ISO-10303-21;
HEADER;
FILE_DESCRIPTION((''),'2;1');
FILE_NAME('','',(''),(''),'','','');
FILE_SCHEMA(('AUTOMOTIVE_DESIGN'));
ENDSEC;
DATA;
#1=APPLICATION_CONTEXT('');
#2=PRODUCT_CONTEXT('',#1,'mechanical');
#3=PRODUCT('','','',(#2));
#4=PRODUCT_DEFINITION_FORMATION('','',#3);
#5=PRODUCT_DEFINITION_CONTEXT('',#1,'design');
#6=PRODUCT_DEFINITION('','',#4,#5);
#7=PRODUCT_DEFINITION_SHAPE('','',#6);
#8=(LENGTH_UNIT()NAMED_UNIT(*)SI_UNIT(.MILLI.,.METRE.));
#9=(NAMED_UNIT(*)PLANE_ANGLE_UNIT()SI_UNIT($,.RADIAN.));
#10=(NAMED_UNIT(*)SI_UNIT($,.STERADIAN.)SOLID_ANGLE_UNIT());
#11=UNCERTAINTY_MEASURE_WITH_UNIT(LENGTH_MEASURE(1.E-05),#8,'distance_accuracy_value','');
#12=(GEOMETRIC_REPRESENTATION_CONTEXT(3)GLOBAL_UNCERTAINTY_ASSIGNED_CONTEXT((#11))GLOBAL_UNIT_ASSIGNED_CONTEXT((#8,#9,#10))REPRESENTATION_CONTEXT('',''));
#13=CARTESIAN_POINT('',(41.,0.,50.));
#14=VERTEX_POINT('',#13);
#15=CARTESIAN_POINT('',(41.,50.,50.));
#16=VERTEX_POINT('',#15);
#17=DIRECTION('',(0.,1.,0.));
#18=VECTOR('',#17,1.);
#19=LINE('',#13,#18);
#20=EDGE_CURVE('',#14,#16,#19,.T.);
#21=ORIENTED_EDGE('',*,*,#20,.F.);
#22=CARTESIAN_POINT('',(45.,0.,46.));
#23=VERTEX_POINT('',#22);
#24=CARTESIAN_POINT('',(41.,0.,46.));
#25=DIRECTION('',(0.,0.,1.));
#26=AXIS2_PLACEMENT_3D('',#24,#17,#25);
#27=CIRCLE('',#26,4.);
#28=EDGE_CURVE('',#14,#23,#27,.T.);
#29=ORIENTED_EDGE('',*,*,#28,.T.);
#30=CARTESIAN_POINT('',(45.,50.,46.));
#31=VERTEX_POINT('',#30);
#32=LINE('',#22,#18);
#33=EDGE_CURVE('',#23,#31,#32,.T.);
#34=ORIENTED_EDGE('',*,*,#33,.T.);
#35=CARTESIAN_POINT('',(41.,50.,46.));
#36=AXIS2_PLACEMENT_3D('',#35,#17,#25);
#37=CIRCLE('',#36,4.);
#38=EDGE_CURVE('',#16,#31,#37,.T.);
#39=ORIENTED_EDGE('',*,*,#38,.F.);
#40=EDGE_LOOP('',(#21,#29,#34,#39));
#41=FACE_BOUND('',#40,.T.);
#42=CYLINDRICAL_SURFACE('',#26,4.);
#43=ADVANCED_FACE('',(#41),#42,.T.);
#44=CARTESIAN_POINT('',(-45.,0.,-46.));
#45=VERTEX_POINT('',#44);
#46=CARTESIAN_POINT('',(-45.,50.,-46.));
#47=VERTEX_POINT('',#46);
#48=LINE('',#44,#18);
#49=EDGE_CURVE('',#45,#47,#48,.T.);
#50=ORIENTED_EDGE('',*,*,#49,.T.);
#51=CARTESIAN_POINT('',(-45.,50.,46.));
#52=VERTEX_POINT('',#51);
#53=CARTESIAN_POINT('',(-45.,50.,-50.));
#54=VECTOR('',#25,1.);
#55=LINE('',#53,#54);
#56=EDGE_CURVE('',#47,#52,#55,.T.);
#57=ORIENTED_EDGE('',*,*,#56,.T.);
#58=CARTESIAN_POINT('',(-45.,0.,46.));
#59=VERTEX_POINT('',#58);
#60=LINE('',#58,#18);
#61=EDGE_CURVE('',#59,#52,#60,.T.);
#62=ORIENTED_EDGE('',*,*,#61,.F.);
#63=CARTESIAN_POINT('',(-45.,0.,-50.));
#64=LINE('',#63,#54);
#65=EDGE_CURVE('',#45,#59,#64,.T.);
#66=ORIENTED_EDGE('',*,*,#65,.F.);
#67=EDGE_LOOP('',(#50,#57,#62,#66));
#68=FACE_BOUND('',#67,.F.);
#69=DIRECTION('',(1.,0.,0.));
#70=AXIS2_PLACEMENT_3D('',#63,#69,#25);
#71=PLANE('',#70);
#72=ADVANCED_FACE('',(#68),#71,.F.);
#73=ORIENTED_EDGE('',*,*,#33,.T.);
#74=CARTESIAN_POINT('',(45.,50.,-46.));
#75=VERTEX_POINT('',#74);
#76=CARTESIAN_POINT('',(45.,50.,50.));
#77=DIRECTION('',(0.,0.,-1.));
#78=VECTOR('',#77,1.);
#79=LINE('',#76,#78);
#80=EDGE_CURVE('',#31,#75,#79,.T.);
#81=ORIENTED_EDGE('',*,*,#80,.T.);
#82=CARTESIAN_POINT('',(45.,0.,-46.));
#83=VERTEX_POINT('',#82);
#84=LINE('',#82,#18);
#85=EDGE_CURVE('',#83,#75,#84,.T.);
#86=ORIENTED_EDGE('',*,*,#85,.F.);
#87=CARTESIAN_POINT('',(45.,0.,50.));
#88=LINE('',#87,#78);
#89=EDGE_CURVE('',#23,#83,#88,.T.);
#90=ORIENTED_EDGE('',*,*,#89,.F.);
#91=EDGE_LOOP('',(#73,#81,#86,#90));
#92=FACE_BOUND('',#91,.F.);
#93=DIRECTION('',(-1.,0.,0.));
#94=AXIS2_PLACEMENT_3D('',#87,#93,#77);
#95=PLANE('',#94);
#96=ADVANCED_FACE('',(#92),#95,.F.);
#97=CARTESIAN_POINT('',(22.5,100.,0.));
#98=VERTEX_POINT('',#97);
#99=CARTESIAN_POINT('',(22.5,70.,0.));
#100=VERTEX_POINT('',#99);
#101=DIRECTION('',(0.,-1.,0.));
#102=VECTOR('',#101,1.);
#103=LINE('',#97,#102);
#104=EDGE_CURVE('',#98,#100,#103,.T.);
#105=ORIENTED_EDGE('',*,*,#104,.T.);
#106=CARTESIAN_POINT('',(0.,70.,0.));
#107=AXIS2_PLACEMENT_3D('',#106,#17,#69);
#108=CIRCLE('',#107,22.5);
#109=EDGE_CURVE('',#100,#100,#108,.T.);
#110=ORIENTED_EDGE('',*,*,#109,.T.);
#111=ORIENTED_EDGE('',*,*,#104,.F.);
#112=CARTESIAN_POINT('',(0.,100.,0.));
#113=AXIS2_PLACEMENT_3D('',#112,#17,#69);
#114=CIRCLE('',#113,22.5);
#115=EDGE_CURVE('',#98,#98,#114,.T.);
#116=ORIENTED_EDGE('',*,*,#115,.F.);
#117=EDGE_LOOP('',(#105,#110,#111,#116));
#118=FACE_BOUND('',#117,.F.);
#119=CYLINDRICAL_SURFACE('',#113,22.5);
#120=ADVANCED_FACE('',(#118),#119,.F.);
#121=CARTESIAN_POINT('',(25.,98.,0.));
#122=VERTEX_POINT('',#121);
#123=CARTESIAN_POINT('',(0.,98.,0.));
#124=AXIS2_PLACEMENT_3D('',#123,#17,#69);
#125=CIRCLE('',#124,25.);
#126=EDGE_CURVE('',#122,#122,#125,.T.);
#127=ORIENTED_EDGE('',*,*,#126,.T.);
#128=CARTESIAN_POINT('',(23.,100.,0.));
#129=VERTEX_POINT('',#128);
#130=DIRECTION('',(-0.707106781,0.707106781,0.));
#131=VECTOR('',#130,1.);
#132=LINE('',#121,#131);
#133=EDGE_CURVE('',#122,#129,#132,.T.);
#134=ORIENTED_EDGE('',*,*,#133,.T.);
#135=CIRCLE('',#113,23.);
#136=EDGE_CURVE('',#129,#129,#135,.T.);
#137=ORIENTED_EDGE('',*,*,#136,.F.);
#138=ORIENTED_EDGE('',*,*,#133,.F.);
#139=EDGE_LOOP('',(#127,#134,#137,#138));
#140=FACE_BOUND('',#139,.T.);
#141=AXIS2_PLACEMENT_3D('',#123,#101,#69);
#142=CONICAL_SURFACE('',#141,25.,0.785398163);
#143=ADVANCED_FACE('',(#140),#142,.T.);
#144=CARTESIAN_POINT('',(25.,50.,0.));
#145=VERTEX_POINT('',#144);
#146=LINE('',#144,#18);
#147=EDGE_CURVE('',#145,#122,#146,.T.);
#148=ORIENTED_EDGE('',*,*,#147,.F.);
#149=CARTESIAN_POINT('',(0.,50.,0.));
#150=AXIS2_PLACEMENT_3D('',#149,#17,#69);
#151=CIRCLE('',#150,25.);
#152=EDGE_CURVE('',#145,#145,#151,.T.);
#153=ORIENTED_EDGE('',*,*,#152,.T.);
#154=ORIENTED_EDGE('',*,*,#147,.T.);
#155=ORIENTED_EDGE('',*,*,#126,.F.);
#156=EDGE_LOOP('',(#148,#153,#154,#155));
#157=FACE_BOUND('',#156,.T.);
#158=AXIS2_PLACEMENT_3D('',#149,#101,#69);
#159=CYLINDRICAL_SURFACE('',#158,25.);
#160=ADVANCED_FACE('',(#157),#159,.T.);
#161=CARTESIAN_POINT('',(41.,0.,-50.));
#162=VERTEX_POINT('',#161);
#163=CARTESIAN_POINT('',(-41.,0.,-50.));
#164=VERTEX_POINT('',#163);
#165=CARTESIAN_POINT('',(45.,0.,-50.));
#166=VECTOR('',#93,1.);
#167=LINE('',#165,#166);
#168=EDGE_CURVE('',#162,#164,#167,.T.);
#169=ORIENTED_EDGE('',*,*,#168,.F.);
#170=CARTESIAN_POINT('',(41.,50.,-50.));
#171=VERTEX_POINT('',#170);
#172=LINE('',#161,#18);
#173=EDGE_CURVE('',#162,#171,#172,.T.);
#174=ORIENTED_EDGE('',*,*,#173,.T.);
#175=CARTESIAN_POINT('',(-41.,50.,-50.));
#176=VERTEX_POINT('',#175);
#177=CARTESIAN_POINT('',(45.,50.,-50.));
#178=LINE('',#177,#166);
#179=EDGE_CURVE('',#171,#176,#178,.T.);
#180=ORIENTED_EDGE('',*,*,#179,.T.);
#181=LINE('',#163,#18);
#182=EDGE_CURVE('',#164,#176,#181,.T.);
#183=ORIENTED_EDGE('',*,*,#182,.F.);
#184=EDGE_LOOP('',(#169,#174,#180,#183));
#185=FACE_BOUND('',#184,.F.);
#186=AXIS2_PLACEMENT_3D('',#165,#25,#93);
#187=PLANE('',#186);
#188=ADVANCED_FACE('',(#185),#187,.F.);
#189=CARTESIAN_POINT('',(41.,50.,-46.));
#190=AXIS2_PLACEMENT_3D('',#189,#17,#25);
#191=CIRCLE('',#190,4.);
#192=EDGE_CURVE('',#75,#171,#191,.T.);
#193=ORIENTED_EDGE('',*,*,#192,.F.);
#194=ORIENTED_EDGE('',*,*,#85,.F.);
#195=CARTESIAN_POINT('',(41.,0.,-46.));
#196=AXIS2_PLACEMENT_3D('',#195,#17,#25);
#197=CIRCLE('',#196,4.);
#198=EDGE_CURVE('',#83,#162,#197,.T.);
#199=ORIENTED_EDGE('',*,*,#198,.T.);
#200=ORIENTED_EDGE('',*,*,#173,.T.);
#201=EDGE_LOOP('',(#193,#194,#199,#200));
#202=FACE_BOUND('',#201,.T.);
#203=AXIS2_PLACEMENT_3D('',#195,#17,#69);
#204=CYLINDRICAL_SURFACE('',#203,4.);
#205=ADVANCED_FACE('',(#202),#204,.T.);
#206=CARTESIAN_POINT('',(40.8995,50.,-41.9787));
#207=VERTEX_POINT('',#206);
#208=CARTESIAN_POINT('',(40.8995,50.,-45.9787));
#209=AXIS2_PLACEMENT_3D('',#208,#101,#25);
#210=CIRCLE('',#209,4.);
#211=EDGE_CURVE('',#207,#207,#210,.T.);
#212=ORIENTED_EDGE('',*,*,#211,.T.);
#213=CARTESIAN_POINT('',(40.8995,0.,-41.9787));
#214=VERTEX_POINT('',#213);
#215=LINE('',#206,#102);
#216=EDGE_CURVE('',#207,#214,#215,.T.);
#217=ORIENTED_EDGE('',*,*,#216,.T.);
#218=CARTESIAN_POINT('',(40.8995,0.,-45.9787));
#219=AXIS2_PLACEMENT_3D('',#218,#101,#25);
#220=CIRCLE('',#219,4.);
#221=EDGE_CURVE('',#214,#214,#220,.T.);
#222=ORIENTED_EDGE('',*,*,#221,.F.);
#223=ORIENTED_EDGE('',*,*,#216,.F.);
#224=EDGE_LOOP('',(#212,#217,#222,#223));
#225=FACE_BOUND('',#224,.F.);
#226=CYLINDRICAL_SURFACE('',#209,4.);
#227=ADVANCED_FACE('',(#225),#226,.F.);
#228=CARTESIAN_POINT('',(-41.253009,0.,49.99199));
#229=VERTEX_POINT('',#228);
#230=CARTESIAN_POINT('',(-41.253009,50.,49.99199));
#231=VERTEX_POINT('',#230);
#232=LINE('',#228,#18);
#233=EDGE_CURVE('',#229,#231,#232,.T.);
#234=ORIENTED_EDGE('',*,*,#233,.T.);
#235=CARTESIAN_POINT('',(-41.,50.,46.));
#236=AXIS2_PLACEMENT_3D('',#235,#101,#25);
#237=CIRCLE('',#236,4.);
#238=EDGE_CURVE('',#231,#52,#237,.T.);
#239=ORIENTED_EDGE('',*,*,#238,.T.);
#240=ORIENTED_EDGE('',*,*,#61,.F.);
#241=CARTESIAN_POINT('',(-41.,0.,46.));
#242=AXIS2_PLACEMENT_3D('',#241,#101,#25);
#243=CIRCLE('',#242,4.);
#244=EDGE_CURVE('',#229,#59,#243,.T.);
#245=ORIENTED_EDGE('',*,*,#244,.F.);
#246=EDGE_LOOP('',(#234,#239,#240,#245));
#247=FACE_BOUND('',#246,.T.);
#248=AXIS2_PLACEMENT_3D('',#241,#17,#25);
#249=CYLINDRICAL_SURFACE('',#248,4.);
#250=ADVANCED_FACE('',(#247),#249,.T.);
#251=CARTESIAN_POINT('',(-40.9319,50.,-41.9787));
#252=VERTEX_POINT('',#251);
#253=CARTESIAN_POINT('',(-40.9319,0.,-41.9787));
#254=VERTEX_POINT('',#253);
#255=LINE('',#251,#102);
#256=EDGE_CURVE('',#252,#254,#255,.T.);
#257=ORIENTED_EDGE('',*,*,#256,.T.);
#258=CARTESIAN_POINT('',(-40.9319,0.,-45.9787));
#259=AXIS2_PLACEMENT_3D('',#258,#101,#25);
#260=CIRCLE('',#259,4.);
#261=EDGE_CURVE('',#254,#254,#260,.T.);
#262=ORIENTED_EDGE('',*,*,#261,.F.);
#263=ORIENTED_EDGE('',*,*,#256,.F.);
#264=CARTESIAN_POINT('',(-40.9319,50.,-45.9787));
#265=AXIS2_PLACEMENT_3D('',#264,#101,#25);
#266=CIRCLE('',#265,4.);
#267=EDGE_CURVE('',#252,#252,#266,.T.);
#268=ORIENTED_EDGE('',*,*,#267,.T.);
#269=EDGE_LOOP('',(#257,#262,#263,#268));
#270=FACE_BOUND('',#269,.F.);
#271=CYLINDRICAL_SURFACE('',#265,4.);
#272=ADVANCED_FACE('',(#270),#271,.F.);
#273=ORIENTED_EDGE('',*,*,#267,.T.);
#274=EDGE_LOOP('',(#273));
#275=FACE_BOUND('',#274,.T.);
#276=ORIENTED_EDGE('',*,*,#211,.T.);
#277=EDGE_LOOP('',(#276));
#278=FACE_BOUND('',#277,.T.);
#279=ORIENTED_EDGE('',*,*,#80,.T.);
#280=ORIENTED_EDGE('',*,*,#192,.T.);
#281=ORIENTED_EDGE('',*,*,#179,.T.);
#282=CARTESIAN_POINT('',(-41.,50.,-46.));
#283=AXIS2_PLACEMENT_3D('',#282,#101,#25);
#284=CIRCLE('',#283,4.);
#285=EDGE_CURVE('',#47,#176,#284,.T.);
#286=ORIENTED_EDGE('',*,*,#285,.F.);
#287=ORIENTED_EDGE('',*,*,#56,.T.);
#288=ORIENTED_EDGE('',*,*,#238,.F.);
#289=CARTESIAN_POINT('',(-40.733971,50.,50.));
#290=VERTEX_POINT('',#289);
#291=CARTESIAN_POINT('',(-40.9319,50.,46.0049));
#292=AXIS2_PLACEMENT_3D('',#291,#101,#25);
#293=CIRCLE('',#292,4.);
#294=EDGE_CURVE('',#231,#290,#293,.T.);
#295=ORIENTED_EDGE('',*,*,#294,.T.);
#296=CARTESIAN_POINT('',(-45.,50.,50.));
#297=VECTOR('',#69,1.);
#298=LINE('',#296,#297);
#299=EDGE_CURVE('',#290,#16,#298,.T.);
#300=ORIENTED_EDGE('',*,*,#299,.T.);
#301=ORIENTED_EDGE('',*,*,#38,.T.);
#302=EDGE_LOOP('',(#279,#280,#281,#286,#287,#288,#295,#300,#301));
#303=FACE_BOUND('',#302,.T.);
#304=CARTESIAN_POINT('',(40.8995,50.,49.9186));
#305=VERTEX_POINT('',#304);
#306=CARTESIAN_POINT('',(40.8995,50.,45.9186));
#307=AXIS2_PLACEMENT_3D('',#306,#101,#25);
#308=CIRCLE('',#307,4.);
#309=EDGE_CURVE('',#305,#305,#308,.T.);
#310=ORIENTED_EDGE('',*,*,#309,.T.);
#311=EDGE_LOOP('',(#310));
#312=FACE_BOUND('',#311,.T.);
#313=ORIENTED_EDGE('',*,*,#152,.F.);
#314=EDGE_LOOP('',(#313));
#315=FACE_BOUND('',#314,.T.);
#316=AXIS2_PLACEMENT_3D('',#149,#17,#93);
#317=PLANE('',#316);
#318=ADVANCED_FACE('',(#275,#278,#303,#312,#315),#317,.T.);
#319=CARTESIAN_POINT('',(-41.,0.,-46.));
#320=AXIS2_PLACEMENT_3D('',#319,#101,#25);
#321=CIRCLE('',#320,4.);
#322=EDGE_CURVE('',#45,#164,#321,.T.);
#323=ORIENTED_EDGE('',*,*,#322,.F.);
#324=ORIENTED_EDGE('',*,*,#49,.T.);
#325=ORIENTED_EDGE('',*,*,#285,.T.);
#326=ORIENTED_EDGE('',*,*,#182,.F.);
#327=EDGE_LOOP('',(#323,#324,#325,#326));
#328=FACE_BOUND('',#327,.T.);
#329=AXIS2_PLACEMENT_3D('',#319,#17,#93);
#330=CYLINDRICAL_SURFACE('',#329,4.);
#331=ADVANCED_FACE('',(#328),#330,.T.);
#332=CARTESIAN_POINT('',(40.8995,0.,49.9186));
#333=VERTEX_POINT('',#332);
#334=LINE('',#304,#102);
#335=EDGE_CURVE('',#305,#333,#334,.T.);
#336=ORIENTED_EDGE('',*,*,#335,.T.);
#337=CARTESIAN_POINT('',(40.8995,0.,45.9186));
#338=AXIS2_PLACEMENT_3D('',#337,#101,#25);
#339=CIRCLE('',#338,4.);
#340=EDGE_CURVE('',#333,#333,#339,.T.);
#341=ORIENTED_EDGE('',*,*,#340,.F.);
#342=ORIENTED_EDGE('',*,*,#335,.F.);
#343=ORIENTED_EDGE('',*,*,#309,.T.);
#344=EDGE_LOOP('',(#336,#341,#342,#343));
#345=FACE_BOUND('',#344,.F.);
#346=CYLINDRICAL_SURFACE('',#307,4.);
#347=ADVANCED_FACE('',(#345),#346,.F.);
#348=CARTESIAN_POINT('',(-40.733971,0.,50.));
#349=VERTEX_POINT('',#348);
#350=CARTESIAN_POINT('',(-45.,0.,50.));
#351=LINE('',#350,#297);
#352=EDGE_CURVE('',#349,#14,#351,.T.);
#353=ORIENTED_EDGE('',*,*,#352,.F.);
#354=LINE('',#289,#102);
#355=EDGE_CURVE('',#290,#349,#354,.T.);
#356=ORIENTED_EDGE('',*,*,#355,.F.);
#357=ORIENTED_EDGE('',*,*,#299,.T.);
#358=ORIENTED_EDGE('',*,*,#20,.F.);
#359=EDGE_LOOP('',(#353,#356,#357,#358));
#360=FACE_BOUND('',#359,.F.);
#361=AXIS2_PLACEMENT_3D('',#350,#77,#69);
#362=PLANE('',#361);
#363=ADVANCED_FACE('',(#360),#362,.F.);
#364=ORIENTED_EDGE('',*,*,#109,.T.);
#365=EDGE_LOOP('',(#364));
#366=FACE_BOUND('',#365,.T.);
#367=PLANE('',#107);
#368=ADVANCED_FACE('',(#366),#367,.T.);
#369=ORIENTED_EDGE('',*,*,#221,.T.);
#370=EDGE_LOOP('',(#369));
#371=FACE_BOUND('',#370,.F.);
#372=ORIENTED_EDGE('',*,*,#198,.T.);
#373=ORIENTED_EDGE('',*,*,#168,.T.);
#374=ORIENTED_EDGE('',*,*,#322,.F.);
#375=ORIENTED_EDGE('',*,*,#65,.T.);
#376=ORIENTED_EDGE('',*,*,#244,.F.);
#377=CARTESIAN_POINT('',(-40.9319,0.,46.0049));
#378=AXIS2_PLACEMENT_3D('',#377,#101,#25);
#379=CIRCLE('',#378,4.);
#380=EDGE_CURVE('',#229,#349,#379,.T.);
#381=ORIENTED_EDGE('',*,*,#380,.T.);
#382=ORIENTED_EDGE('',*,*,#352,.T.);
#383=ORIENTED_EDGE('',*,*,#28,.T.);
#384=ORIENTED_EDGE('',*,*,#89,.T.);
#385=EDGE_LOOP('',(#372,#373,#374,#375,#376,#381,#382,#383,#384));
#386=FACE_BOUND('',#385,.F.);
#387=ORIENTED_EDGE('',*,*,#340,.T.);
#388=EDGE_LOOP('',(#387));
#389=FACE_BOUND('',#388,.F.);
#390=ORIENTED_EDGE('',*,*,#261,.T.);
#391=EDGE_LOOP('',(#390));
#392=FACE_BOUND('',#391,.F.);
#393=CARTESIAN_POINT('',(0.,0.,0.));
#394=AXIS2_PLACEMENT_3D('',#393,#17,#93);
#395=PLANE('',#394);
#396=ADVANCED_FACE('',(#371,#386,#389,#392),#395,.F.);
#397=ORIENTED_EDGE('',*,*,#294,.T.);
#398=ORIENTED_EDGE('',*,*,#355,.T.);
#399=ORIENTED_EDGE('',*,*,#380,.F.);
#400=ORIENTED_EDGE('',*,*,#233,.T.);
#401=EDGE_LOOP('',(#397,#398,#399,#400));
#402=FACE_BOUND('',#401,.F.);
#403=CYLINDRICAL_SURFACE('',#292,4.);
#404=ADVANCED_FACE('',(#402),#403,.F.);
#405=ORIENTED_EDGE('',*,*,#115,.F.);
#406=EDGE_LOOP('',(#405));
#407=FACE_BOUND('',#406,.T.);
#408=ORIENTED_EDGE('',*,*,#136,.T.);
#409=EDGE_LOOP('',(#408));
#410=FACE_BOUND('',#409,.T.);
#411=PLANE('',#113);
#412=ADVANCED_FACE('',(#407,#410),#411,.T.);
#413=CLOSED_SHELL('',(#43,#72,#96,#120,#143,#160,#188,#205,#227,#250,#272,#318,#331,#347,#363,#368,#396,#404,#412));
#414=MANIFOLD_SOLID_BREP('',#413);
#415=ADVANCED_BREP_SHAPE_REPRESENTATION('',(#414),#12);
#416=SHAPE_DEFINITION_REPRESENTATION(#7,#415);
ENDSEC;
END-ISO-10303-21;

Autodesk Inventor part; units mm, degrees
ref_plane "YZ Plane" through (0, 0, 0) normal (1, 0, 0) x (0, 1, 0)
ref_plane "XZ Plane" through (0, 0, 0) normal (0, 1, 0) x (-1, 0, 0)
ref_plane "XY Plane" through (0, 0, 0) normal (0, 0, 1) x (1, 0, 0)
sketch "Sketch1" plane through (0, 0, 0) normal (0, 1, 0) x (-1, 0, 0)
  line L0 (45, 50) -> (-45, 50)
  line L1 (-45, 50) -> (-45, -50)
  line L2 (-45, -50) -> (45, -50)
  line L3 (45, -50) -> (45, 50)
  line L4 (45, 50) -> (-45, -50) construction
  line L5 (-45, 50) -> (45, -50) construction
  point P0 (0, 0)
  point P1 (42.3062, 47.0069)
  point P2 (42.3062, -47.0069)
  point P3 (-42.3062, -47.0069)
  point P4 (-42.3062, 47.0069)
  dimension "d0" = 90
  dimension "d1" = 100
extrude "Extrusion1" add sketch "Sketch1" along normal blind 50
sketch "Sketch2" plane through (0, 50, 0) normal (0, 1, 0) x (1, 0, 0)
  circle A0 centre (0, 0) radius 25
  dimension "d5" = 50
extrude "Extrusion2" add sketch "Sketch2" along normal blind 50
sketch "Sketch3" plane through (0, 50, 0) normal (0, 1, 0) x (1, 0, 0)
  point P0 (0, 0)
fillet "Fillet1" radius 4 1 edges at (45, 25, 50)
fillet "Fillet2" radius 4 3 edges at (-45, 25, 50) (45, 25, -50) (-45, 25, -50)
sketch "Sketch4" plane through (0, 50, 0) normal (0, 1, 0) x (1, 0, 0)
  circle A0 centre (-40.9319, 45.9787) radius 4
  circle A1 centre (40.8995, 45.9787) radius 4
  circle A2 centre (40.8995, -45.9186) radius 4
  circle A3 centre (-40.9319, -46.0049) radius 4
  point P0 (0, 0)
  dimension "d20" = 8
  dimension "d21" = 8
  dimension "d22" = 8
  dimension "d23" = 8
sketch "Sketch5" plane through (0, 50, 0) normal (0, 1, 0) x (1, 0, 0)
  circle A0 centre (0, 0) radius 22.5
  dimension "d16" = 45
sketch "Sketch6" plane through (0, 100, 0) normal (0, 1, 0) x (1, 0, 0)
  circle A0 centre (0, 0) radius 22.5
  dimension "d17" = 45
extrude "Extrusion3" cut sketch "Sketch6" against normal blind 30
sketch "Sketch7" plane through (0, 50, 0) normal (0, 1, 0) x (1, 0, 0)
  point P0 (0, 0)
sketch "Sketch8" plane through (0, 50, 0) normal (0, 1, 0) x (1, 0, 0)
  point P0 (0, 0)
hole "Hole1" at (40.8995, 50, 45.9186) direction (0, -1, 0) diameter 8 end through all
hole "Hole2" at (40.8995, 50, -45.9787) direction (0, -1, 0) diameter 8 end through all
hole "Hole3" at (-40.9319, 50, 46.0049) direction (0, -1, 0) diameter 8 end through all
hole "Hole4" at (-40.9319, 50, -45.9787) direction (0, -1, 0) diameter 8 end through all
thread "Thread1" size "M8x1.25" class "6H" standard "ANSI Metric M Profile" full length
thread "Thread2" size "M8x1.25" class "6H" standard "ANSI Metric M Profile" full length
thread "Thread3" size "M8x1.25" class "6H" standard "ANSI Metric M Profile" full length
thread "Thread4" size "M8x1.25" class "6H" standard "ANSI Metric M Profile" full length
chamfer "Chamfer1" distance 2 angle 45 1 edges at (-25, 100, 0)
sketch "Sketch9" plane through (0, 50, 0) normal (0, 1, 0) x (1, 0, 0)
  point P0 (0, 0)
properties part number "P#1_LAB_DINAMICA"
